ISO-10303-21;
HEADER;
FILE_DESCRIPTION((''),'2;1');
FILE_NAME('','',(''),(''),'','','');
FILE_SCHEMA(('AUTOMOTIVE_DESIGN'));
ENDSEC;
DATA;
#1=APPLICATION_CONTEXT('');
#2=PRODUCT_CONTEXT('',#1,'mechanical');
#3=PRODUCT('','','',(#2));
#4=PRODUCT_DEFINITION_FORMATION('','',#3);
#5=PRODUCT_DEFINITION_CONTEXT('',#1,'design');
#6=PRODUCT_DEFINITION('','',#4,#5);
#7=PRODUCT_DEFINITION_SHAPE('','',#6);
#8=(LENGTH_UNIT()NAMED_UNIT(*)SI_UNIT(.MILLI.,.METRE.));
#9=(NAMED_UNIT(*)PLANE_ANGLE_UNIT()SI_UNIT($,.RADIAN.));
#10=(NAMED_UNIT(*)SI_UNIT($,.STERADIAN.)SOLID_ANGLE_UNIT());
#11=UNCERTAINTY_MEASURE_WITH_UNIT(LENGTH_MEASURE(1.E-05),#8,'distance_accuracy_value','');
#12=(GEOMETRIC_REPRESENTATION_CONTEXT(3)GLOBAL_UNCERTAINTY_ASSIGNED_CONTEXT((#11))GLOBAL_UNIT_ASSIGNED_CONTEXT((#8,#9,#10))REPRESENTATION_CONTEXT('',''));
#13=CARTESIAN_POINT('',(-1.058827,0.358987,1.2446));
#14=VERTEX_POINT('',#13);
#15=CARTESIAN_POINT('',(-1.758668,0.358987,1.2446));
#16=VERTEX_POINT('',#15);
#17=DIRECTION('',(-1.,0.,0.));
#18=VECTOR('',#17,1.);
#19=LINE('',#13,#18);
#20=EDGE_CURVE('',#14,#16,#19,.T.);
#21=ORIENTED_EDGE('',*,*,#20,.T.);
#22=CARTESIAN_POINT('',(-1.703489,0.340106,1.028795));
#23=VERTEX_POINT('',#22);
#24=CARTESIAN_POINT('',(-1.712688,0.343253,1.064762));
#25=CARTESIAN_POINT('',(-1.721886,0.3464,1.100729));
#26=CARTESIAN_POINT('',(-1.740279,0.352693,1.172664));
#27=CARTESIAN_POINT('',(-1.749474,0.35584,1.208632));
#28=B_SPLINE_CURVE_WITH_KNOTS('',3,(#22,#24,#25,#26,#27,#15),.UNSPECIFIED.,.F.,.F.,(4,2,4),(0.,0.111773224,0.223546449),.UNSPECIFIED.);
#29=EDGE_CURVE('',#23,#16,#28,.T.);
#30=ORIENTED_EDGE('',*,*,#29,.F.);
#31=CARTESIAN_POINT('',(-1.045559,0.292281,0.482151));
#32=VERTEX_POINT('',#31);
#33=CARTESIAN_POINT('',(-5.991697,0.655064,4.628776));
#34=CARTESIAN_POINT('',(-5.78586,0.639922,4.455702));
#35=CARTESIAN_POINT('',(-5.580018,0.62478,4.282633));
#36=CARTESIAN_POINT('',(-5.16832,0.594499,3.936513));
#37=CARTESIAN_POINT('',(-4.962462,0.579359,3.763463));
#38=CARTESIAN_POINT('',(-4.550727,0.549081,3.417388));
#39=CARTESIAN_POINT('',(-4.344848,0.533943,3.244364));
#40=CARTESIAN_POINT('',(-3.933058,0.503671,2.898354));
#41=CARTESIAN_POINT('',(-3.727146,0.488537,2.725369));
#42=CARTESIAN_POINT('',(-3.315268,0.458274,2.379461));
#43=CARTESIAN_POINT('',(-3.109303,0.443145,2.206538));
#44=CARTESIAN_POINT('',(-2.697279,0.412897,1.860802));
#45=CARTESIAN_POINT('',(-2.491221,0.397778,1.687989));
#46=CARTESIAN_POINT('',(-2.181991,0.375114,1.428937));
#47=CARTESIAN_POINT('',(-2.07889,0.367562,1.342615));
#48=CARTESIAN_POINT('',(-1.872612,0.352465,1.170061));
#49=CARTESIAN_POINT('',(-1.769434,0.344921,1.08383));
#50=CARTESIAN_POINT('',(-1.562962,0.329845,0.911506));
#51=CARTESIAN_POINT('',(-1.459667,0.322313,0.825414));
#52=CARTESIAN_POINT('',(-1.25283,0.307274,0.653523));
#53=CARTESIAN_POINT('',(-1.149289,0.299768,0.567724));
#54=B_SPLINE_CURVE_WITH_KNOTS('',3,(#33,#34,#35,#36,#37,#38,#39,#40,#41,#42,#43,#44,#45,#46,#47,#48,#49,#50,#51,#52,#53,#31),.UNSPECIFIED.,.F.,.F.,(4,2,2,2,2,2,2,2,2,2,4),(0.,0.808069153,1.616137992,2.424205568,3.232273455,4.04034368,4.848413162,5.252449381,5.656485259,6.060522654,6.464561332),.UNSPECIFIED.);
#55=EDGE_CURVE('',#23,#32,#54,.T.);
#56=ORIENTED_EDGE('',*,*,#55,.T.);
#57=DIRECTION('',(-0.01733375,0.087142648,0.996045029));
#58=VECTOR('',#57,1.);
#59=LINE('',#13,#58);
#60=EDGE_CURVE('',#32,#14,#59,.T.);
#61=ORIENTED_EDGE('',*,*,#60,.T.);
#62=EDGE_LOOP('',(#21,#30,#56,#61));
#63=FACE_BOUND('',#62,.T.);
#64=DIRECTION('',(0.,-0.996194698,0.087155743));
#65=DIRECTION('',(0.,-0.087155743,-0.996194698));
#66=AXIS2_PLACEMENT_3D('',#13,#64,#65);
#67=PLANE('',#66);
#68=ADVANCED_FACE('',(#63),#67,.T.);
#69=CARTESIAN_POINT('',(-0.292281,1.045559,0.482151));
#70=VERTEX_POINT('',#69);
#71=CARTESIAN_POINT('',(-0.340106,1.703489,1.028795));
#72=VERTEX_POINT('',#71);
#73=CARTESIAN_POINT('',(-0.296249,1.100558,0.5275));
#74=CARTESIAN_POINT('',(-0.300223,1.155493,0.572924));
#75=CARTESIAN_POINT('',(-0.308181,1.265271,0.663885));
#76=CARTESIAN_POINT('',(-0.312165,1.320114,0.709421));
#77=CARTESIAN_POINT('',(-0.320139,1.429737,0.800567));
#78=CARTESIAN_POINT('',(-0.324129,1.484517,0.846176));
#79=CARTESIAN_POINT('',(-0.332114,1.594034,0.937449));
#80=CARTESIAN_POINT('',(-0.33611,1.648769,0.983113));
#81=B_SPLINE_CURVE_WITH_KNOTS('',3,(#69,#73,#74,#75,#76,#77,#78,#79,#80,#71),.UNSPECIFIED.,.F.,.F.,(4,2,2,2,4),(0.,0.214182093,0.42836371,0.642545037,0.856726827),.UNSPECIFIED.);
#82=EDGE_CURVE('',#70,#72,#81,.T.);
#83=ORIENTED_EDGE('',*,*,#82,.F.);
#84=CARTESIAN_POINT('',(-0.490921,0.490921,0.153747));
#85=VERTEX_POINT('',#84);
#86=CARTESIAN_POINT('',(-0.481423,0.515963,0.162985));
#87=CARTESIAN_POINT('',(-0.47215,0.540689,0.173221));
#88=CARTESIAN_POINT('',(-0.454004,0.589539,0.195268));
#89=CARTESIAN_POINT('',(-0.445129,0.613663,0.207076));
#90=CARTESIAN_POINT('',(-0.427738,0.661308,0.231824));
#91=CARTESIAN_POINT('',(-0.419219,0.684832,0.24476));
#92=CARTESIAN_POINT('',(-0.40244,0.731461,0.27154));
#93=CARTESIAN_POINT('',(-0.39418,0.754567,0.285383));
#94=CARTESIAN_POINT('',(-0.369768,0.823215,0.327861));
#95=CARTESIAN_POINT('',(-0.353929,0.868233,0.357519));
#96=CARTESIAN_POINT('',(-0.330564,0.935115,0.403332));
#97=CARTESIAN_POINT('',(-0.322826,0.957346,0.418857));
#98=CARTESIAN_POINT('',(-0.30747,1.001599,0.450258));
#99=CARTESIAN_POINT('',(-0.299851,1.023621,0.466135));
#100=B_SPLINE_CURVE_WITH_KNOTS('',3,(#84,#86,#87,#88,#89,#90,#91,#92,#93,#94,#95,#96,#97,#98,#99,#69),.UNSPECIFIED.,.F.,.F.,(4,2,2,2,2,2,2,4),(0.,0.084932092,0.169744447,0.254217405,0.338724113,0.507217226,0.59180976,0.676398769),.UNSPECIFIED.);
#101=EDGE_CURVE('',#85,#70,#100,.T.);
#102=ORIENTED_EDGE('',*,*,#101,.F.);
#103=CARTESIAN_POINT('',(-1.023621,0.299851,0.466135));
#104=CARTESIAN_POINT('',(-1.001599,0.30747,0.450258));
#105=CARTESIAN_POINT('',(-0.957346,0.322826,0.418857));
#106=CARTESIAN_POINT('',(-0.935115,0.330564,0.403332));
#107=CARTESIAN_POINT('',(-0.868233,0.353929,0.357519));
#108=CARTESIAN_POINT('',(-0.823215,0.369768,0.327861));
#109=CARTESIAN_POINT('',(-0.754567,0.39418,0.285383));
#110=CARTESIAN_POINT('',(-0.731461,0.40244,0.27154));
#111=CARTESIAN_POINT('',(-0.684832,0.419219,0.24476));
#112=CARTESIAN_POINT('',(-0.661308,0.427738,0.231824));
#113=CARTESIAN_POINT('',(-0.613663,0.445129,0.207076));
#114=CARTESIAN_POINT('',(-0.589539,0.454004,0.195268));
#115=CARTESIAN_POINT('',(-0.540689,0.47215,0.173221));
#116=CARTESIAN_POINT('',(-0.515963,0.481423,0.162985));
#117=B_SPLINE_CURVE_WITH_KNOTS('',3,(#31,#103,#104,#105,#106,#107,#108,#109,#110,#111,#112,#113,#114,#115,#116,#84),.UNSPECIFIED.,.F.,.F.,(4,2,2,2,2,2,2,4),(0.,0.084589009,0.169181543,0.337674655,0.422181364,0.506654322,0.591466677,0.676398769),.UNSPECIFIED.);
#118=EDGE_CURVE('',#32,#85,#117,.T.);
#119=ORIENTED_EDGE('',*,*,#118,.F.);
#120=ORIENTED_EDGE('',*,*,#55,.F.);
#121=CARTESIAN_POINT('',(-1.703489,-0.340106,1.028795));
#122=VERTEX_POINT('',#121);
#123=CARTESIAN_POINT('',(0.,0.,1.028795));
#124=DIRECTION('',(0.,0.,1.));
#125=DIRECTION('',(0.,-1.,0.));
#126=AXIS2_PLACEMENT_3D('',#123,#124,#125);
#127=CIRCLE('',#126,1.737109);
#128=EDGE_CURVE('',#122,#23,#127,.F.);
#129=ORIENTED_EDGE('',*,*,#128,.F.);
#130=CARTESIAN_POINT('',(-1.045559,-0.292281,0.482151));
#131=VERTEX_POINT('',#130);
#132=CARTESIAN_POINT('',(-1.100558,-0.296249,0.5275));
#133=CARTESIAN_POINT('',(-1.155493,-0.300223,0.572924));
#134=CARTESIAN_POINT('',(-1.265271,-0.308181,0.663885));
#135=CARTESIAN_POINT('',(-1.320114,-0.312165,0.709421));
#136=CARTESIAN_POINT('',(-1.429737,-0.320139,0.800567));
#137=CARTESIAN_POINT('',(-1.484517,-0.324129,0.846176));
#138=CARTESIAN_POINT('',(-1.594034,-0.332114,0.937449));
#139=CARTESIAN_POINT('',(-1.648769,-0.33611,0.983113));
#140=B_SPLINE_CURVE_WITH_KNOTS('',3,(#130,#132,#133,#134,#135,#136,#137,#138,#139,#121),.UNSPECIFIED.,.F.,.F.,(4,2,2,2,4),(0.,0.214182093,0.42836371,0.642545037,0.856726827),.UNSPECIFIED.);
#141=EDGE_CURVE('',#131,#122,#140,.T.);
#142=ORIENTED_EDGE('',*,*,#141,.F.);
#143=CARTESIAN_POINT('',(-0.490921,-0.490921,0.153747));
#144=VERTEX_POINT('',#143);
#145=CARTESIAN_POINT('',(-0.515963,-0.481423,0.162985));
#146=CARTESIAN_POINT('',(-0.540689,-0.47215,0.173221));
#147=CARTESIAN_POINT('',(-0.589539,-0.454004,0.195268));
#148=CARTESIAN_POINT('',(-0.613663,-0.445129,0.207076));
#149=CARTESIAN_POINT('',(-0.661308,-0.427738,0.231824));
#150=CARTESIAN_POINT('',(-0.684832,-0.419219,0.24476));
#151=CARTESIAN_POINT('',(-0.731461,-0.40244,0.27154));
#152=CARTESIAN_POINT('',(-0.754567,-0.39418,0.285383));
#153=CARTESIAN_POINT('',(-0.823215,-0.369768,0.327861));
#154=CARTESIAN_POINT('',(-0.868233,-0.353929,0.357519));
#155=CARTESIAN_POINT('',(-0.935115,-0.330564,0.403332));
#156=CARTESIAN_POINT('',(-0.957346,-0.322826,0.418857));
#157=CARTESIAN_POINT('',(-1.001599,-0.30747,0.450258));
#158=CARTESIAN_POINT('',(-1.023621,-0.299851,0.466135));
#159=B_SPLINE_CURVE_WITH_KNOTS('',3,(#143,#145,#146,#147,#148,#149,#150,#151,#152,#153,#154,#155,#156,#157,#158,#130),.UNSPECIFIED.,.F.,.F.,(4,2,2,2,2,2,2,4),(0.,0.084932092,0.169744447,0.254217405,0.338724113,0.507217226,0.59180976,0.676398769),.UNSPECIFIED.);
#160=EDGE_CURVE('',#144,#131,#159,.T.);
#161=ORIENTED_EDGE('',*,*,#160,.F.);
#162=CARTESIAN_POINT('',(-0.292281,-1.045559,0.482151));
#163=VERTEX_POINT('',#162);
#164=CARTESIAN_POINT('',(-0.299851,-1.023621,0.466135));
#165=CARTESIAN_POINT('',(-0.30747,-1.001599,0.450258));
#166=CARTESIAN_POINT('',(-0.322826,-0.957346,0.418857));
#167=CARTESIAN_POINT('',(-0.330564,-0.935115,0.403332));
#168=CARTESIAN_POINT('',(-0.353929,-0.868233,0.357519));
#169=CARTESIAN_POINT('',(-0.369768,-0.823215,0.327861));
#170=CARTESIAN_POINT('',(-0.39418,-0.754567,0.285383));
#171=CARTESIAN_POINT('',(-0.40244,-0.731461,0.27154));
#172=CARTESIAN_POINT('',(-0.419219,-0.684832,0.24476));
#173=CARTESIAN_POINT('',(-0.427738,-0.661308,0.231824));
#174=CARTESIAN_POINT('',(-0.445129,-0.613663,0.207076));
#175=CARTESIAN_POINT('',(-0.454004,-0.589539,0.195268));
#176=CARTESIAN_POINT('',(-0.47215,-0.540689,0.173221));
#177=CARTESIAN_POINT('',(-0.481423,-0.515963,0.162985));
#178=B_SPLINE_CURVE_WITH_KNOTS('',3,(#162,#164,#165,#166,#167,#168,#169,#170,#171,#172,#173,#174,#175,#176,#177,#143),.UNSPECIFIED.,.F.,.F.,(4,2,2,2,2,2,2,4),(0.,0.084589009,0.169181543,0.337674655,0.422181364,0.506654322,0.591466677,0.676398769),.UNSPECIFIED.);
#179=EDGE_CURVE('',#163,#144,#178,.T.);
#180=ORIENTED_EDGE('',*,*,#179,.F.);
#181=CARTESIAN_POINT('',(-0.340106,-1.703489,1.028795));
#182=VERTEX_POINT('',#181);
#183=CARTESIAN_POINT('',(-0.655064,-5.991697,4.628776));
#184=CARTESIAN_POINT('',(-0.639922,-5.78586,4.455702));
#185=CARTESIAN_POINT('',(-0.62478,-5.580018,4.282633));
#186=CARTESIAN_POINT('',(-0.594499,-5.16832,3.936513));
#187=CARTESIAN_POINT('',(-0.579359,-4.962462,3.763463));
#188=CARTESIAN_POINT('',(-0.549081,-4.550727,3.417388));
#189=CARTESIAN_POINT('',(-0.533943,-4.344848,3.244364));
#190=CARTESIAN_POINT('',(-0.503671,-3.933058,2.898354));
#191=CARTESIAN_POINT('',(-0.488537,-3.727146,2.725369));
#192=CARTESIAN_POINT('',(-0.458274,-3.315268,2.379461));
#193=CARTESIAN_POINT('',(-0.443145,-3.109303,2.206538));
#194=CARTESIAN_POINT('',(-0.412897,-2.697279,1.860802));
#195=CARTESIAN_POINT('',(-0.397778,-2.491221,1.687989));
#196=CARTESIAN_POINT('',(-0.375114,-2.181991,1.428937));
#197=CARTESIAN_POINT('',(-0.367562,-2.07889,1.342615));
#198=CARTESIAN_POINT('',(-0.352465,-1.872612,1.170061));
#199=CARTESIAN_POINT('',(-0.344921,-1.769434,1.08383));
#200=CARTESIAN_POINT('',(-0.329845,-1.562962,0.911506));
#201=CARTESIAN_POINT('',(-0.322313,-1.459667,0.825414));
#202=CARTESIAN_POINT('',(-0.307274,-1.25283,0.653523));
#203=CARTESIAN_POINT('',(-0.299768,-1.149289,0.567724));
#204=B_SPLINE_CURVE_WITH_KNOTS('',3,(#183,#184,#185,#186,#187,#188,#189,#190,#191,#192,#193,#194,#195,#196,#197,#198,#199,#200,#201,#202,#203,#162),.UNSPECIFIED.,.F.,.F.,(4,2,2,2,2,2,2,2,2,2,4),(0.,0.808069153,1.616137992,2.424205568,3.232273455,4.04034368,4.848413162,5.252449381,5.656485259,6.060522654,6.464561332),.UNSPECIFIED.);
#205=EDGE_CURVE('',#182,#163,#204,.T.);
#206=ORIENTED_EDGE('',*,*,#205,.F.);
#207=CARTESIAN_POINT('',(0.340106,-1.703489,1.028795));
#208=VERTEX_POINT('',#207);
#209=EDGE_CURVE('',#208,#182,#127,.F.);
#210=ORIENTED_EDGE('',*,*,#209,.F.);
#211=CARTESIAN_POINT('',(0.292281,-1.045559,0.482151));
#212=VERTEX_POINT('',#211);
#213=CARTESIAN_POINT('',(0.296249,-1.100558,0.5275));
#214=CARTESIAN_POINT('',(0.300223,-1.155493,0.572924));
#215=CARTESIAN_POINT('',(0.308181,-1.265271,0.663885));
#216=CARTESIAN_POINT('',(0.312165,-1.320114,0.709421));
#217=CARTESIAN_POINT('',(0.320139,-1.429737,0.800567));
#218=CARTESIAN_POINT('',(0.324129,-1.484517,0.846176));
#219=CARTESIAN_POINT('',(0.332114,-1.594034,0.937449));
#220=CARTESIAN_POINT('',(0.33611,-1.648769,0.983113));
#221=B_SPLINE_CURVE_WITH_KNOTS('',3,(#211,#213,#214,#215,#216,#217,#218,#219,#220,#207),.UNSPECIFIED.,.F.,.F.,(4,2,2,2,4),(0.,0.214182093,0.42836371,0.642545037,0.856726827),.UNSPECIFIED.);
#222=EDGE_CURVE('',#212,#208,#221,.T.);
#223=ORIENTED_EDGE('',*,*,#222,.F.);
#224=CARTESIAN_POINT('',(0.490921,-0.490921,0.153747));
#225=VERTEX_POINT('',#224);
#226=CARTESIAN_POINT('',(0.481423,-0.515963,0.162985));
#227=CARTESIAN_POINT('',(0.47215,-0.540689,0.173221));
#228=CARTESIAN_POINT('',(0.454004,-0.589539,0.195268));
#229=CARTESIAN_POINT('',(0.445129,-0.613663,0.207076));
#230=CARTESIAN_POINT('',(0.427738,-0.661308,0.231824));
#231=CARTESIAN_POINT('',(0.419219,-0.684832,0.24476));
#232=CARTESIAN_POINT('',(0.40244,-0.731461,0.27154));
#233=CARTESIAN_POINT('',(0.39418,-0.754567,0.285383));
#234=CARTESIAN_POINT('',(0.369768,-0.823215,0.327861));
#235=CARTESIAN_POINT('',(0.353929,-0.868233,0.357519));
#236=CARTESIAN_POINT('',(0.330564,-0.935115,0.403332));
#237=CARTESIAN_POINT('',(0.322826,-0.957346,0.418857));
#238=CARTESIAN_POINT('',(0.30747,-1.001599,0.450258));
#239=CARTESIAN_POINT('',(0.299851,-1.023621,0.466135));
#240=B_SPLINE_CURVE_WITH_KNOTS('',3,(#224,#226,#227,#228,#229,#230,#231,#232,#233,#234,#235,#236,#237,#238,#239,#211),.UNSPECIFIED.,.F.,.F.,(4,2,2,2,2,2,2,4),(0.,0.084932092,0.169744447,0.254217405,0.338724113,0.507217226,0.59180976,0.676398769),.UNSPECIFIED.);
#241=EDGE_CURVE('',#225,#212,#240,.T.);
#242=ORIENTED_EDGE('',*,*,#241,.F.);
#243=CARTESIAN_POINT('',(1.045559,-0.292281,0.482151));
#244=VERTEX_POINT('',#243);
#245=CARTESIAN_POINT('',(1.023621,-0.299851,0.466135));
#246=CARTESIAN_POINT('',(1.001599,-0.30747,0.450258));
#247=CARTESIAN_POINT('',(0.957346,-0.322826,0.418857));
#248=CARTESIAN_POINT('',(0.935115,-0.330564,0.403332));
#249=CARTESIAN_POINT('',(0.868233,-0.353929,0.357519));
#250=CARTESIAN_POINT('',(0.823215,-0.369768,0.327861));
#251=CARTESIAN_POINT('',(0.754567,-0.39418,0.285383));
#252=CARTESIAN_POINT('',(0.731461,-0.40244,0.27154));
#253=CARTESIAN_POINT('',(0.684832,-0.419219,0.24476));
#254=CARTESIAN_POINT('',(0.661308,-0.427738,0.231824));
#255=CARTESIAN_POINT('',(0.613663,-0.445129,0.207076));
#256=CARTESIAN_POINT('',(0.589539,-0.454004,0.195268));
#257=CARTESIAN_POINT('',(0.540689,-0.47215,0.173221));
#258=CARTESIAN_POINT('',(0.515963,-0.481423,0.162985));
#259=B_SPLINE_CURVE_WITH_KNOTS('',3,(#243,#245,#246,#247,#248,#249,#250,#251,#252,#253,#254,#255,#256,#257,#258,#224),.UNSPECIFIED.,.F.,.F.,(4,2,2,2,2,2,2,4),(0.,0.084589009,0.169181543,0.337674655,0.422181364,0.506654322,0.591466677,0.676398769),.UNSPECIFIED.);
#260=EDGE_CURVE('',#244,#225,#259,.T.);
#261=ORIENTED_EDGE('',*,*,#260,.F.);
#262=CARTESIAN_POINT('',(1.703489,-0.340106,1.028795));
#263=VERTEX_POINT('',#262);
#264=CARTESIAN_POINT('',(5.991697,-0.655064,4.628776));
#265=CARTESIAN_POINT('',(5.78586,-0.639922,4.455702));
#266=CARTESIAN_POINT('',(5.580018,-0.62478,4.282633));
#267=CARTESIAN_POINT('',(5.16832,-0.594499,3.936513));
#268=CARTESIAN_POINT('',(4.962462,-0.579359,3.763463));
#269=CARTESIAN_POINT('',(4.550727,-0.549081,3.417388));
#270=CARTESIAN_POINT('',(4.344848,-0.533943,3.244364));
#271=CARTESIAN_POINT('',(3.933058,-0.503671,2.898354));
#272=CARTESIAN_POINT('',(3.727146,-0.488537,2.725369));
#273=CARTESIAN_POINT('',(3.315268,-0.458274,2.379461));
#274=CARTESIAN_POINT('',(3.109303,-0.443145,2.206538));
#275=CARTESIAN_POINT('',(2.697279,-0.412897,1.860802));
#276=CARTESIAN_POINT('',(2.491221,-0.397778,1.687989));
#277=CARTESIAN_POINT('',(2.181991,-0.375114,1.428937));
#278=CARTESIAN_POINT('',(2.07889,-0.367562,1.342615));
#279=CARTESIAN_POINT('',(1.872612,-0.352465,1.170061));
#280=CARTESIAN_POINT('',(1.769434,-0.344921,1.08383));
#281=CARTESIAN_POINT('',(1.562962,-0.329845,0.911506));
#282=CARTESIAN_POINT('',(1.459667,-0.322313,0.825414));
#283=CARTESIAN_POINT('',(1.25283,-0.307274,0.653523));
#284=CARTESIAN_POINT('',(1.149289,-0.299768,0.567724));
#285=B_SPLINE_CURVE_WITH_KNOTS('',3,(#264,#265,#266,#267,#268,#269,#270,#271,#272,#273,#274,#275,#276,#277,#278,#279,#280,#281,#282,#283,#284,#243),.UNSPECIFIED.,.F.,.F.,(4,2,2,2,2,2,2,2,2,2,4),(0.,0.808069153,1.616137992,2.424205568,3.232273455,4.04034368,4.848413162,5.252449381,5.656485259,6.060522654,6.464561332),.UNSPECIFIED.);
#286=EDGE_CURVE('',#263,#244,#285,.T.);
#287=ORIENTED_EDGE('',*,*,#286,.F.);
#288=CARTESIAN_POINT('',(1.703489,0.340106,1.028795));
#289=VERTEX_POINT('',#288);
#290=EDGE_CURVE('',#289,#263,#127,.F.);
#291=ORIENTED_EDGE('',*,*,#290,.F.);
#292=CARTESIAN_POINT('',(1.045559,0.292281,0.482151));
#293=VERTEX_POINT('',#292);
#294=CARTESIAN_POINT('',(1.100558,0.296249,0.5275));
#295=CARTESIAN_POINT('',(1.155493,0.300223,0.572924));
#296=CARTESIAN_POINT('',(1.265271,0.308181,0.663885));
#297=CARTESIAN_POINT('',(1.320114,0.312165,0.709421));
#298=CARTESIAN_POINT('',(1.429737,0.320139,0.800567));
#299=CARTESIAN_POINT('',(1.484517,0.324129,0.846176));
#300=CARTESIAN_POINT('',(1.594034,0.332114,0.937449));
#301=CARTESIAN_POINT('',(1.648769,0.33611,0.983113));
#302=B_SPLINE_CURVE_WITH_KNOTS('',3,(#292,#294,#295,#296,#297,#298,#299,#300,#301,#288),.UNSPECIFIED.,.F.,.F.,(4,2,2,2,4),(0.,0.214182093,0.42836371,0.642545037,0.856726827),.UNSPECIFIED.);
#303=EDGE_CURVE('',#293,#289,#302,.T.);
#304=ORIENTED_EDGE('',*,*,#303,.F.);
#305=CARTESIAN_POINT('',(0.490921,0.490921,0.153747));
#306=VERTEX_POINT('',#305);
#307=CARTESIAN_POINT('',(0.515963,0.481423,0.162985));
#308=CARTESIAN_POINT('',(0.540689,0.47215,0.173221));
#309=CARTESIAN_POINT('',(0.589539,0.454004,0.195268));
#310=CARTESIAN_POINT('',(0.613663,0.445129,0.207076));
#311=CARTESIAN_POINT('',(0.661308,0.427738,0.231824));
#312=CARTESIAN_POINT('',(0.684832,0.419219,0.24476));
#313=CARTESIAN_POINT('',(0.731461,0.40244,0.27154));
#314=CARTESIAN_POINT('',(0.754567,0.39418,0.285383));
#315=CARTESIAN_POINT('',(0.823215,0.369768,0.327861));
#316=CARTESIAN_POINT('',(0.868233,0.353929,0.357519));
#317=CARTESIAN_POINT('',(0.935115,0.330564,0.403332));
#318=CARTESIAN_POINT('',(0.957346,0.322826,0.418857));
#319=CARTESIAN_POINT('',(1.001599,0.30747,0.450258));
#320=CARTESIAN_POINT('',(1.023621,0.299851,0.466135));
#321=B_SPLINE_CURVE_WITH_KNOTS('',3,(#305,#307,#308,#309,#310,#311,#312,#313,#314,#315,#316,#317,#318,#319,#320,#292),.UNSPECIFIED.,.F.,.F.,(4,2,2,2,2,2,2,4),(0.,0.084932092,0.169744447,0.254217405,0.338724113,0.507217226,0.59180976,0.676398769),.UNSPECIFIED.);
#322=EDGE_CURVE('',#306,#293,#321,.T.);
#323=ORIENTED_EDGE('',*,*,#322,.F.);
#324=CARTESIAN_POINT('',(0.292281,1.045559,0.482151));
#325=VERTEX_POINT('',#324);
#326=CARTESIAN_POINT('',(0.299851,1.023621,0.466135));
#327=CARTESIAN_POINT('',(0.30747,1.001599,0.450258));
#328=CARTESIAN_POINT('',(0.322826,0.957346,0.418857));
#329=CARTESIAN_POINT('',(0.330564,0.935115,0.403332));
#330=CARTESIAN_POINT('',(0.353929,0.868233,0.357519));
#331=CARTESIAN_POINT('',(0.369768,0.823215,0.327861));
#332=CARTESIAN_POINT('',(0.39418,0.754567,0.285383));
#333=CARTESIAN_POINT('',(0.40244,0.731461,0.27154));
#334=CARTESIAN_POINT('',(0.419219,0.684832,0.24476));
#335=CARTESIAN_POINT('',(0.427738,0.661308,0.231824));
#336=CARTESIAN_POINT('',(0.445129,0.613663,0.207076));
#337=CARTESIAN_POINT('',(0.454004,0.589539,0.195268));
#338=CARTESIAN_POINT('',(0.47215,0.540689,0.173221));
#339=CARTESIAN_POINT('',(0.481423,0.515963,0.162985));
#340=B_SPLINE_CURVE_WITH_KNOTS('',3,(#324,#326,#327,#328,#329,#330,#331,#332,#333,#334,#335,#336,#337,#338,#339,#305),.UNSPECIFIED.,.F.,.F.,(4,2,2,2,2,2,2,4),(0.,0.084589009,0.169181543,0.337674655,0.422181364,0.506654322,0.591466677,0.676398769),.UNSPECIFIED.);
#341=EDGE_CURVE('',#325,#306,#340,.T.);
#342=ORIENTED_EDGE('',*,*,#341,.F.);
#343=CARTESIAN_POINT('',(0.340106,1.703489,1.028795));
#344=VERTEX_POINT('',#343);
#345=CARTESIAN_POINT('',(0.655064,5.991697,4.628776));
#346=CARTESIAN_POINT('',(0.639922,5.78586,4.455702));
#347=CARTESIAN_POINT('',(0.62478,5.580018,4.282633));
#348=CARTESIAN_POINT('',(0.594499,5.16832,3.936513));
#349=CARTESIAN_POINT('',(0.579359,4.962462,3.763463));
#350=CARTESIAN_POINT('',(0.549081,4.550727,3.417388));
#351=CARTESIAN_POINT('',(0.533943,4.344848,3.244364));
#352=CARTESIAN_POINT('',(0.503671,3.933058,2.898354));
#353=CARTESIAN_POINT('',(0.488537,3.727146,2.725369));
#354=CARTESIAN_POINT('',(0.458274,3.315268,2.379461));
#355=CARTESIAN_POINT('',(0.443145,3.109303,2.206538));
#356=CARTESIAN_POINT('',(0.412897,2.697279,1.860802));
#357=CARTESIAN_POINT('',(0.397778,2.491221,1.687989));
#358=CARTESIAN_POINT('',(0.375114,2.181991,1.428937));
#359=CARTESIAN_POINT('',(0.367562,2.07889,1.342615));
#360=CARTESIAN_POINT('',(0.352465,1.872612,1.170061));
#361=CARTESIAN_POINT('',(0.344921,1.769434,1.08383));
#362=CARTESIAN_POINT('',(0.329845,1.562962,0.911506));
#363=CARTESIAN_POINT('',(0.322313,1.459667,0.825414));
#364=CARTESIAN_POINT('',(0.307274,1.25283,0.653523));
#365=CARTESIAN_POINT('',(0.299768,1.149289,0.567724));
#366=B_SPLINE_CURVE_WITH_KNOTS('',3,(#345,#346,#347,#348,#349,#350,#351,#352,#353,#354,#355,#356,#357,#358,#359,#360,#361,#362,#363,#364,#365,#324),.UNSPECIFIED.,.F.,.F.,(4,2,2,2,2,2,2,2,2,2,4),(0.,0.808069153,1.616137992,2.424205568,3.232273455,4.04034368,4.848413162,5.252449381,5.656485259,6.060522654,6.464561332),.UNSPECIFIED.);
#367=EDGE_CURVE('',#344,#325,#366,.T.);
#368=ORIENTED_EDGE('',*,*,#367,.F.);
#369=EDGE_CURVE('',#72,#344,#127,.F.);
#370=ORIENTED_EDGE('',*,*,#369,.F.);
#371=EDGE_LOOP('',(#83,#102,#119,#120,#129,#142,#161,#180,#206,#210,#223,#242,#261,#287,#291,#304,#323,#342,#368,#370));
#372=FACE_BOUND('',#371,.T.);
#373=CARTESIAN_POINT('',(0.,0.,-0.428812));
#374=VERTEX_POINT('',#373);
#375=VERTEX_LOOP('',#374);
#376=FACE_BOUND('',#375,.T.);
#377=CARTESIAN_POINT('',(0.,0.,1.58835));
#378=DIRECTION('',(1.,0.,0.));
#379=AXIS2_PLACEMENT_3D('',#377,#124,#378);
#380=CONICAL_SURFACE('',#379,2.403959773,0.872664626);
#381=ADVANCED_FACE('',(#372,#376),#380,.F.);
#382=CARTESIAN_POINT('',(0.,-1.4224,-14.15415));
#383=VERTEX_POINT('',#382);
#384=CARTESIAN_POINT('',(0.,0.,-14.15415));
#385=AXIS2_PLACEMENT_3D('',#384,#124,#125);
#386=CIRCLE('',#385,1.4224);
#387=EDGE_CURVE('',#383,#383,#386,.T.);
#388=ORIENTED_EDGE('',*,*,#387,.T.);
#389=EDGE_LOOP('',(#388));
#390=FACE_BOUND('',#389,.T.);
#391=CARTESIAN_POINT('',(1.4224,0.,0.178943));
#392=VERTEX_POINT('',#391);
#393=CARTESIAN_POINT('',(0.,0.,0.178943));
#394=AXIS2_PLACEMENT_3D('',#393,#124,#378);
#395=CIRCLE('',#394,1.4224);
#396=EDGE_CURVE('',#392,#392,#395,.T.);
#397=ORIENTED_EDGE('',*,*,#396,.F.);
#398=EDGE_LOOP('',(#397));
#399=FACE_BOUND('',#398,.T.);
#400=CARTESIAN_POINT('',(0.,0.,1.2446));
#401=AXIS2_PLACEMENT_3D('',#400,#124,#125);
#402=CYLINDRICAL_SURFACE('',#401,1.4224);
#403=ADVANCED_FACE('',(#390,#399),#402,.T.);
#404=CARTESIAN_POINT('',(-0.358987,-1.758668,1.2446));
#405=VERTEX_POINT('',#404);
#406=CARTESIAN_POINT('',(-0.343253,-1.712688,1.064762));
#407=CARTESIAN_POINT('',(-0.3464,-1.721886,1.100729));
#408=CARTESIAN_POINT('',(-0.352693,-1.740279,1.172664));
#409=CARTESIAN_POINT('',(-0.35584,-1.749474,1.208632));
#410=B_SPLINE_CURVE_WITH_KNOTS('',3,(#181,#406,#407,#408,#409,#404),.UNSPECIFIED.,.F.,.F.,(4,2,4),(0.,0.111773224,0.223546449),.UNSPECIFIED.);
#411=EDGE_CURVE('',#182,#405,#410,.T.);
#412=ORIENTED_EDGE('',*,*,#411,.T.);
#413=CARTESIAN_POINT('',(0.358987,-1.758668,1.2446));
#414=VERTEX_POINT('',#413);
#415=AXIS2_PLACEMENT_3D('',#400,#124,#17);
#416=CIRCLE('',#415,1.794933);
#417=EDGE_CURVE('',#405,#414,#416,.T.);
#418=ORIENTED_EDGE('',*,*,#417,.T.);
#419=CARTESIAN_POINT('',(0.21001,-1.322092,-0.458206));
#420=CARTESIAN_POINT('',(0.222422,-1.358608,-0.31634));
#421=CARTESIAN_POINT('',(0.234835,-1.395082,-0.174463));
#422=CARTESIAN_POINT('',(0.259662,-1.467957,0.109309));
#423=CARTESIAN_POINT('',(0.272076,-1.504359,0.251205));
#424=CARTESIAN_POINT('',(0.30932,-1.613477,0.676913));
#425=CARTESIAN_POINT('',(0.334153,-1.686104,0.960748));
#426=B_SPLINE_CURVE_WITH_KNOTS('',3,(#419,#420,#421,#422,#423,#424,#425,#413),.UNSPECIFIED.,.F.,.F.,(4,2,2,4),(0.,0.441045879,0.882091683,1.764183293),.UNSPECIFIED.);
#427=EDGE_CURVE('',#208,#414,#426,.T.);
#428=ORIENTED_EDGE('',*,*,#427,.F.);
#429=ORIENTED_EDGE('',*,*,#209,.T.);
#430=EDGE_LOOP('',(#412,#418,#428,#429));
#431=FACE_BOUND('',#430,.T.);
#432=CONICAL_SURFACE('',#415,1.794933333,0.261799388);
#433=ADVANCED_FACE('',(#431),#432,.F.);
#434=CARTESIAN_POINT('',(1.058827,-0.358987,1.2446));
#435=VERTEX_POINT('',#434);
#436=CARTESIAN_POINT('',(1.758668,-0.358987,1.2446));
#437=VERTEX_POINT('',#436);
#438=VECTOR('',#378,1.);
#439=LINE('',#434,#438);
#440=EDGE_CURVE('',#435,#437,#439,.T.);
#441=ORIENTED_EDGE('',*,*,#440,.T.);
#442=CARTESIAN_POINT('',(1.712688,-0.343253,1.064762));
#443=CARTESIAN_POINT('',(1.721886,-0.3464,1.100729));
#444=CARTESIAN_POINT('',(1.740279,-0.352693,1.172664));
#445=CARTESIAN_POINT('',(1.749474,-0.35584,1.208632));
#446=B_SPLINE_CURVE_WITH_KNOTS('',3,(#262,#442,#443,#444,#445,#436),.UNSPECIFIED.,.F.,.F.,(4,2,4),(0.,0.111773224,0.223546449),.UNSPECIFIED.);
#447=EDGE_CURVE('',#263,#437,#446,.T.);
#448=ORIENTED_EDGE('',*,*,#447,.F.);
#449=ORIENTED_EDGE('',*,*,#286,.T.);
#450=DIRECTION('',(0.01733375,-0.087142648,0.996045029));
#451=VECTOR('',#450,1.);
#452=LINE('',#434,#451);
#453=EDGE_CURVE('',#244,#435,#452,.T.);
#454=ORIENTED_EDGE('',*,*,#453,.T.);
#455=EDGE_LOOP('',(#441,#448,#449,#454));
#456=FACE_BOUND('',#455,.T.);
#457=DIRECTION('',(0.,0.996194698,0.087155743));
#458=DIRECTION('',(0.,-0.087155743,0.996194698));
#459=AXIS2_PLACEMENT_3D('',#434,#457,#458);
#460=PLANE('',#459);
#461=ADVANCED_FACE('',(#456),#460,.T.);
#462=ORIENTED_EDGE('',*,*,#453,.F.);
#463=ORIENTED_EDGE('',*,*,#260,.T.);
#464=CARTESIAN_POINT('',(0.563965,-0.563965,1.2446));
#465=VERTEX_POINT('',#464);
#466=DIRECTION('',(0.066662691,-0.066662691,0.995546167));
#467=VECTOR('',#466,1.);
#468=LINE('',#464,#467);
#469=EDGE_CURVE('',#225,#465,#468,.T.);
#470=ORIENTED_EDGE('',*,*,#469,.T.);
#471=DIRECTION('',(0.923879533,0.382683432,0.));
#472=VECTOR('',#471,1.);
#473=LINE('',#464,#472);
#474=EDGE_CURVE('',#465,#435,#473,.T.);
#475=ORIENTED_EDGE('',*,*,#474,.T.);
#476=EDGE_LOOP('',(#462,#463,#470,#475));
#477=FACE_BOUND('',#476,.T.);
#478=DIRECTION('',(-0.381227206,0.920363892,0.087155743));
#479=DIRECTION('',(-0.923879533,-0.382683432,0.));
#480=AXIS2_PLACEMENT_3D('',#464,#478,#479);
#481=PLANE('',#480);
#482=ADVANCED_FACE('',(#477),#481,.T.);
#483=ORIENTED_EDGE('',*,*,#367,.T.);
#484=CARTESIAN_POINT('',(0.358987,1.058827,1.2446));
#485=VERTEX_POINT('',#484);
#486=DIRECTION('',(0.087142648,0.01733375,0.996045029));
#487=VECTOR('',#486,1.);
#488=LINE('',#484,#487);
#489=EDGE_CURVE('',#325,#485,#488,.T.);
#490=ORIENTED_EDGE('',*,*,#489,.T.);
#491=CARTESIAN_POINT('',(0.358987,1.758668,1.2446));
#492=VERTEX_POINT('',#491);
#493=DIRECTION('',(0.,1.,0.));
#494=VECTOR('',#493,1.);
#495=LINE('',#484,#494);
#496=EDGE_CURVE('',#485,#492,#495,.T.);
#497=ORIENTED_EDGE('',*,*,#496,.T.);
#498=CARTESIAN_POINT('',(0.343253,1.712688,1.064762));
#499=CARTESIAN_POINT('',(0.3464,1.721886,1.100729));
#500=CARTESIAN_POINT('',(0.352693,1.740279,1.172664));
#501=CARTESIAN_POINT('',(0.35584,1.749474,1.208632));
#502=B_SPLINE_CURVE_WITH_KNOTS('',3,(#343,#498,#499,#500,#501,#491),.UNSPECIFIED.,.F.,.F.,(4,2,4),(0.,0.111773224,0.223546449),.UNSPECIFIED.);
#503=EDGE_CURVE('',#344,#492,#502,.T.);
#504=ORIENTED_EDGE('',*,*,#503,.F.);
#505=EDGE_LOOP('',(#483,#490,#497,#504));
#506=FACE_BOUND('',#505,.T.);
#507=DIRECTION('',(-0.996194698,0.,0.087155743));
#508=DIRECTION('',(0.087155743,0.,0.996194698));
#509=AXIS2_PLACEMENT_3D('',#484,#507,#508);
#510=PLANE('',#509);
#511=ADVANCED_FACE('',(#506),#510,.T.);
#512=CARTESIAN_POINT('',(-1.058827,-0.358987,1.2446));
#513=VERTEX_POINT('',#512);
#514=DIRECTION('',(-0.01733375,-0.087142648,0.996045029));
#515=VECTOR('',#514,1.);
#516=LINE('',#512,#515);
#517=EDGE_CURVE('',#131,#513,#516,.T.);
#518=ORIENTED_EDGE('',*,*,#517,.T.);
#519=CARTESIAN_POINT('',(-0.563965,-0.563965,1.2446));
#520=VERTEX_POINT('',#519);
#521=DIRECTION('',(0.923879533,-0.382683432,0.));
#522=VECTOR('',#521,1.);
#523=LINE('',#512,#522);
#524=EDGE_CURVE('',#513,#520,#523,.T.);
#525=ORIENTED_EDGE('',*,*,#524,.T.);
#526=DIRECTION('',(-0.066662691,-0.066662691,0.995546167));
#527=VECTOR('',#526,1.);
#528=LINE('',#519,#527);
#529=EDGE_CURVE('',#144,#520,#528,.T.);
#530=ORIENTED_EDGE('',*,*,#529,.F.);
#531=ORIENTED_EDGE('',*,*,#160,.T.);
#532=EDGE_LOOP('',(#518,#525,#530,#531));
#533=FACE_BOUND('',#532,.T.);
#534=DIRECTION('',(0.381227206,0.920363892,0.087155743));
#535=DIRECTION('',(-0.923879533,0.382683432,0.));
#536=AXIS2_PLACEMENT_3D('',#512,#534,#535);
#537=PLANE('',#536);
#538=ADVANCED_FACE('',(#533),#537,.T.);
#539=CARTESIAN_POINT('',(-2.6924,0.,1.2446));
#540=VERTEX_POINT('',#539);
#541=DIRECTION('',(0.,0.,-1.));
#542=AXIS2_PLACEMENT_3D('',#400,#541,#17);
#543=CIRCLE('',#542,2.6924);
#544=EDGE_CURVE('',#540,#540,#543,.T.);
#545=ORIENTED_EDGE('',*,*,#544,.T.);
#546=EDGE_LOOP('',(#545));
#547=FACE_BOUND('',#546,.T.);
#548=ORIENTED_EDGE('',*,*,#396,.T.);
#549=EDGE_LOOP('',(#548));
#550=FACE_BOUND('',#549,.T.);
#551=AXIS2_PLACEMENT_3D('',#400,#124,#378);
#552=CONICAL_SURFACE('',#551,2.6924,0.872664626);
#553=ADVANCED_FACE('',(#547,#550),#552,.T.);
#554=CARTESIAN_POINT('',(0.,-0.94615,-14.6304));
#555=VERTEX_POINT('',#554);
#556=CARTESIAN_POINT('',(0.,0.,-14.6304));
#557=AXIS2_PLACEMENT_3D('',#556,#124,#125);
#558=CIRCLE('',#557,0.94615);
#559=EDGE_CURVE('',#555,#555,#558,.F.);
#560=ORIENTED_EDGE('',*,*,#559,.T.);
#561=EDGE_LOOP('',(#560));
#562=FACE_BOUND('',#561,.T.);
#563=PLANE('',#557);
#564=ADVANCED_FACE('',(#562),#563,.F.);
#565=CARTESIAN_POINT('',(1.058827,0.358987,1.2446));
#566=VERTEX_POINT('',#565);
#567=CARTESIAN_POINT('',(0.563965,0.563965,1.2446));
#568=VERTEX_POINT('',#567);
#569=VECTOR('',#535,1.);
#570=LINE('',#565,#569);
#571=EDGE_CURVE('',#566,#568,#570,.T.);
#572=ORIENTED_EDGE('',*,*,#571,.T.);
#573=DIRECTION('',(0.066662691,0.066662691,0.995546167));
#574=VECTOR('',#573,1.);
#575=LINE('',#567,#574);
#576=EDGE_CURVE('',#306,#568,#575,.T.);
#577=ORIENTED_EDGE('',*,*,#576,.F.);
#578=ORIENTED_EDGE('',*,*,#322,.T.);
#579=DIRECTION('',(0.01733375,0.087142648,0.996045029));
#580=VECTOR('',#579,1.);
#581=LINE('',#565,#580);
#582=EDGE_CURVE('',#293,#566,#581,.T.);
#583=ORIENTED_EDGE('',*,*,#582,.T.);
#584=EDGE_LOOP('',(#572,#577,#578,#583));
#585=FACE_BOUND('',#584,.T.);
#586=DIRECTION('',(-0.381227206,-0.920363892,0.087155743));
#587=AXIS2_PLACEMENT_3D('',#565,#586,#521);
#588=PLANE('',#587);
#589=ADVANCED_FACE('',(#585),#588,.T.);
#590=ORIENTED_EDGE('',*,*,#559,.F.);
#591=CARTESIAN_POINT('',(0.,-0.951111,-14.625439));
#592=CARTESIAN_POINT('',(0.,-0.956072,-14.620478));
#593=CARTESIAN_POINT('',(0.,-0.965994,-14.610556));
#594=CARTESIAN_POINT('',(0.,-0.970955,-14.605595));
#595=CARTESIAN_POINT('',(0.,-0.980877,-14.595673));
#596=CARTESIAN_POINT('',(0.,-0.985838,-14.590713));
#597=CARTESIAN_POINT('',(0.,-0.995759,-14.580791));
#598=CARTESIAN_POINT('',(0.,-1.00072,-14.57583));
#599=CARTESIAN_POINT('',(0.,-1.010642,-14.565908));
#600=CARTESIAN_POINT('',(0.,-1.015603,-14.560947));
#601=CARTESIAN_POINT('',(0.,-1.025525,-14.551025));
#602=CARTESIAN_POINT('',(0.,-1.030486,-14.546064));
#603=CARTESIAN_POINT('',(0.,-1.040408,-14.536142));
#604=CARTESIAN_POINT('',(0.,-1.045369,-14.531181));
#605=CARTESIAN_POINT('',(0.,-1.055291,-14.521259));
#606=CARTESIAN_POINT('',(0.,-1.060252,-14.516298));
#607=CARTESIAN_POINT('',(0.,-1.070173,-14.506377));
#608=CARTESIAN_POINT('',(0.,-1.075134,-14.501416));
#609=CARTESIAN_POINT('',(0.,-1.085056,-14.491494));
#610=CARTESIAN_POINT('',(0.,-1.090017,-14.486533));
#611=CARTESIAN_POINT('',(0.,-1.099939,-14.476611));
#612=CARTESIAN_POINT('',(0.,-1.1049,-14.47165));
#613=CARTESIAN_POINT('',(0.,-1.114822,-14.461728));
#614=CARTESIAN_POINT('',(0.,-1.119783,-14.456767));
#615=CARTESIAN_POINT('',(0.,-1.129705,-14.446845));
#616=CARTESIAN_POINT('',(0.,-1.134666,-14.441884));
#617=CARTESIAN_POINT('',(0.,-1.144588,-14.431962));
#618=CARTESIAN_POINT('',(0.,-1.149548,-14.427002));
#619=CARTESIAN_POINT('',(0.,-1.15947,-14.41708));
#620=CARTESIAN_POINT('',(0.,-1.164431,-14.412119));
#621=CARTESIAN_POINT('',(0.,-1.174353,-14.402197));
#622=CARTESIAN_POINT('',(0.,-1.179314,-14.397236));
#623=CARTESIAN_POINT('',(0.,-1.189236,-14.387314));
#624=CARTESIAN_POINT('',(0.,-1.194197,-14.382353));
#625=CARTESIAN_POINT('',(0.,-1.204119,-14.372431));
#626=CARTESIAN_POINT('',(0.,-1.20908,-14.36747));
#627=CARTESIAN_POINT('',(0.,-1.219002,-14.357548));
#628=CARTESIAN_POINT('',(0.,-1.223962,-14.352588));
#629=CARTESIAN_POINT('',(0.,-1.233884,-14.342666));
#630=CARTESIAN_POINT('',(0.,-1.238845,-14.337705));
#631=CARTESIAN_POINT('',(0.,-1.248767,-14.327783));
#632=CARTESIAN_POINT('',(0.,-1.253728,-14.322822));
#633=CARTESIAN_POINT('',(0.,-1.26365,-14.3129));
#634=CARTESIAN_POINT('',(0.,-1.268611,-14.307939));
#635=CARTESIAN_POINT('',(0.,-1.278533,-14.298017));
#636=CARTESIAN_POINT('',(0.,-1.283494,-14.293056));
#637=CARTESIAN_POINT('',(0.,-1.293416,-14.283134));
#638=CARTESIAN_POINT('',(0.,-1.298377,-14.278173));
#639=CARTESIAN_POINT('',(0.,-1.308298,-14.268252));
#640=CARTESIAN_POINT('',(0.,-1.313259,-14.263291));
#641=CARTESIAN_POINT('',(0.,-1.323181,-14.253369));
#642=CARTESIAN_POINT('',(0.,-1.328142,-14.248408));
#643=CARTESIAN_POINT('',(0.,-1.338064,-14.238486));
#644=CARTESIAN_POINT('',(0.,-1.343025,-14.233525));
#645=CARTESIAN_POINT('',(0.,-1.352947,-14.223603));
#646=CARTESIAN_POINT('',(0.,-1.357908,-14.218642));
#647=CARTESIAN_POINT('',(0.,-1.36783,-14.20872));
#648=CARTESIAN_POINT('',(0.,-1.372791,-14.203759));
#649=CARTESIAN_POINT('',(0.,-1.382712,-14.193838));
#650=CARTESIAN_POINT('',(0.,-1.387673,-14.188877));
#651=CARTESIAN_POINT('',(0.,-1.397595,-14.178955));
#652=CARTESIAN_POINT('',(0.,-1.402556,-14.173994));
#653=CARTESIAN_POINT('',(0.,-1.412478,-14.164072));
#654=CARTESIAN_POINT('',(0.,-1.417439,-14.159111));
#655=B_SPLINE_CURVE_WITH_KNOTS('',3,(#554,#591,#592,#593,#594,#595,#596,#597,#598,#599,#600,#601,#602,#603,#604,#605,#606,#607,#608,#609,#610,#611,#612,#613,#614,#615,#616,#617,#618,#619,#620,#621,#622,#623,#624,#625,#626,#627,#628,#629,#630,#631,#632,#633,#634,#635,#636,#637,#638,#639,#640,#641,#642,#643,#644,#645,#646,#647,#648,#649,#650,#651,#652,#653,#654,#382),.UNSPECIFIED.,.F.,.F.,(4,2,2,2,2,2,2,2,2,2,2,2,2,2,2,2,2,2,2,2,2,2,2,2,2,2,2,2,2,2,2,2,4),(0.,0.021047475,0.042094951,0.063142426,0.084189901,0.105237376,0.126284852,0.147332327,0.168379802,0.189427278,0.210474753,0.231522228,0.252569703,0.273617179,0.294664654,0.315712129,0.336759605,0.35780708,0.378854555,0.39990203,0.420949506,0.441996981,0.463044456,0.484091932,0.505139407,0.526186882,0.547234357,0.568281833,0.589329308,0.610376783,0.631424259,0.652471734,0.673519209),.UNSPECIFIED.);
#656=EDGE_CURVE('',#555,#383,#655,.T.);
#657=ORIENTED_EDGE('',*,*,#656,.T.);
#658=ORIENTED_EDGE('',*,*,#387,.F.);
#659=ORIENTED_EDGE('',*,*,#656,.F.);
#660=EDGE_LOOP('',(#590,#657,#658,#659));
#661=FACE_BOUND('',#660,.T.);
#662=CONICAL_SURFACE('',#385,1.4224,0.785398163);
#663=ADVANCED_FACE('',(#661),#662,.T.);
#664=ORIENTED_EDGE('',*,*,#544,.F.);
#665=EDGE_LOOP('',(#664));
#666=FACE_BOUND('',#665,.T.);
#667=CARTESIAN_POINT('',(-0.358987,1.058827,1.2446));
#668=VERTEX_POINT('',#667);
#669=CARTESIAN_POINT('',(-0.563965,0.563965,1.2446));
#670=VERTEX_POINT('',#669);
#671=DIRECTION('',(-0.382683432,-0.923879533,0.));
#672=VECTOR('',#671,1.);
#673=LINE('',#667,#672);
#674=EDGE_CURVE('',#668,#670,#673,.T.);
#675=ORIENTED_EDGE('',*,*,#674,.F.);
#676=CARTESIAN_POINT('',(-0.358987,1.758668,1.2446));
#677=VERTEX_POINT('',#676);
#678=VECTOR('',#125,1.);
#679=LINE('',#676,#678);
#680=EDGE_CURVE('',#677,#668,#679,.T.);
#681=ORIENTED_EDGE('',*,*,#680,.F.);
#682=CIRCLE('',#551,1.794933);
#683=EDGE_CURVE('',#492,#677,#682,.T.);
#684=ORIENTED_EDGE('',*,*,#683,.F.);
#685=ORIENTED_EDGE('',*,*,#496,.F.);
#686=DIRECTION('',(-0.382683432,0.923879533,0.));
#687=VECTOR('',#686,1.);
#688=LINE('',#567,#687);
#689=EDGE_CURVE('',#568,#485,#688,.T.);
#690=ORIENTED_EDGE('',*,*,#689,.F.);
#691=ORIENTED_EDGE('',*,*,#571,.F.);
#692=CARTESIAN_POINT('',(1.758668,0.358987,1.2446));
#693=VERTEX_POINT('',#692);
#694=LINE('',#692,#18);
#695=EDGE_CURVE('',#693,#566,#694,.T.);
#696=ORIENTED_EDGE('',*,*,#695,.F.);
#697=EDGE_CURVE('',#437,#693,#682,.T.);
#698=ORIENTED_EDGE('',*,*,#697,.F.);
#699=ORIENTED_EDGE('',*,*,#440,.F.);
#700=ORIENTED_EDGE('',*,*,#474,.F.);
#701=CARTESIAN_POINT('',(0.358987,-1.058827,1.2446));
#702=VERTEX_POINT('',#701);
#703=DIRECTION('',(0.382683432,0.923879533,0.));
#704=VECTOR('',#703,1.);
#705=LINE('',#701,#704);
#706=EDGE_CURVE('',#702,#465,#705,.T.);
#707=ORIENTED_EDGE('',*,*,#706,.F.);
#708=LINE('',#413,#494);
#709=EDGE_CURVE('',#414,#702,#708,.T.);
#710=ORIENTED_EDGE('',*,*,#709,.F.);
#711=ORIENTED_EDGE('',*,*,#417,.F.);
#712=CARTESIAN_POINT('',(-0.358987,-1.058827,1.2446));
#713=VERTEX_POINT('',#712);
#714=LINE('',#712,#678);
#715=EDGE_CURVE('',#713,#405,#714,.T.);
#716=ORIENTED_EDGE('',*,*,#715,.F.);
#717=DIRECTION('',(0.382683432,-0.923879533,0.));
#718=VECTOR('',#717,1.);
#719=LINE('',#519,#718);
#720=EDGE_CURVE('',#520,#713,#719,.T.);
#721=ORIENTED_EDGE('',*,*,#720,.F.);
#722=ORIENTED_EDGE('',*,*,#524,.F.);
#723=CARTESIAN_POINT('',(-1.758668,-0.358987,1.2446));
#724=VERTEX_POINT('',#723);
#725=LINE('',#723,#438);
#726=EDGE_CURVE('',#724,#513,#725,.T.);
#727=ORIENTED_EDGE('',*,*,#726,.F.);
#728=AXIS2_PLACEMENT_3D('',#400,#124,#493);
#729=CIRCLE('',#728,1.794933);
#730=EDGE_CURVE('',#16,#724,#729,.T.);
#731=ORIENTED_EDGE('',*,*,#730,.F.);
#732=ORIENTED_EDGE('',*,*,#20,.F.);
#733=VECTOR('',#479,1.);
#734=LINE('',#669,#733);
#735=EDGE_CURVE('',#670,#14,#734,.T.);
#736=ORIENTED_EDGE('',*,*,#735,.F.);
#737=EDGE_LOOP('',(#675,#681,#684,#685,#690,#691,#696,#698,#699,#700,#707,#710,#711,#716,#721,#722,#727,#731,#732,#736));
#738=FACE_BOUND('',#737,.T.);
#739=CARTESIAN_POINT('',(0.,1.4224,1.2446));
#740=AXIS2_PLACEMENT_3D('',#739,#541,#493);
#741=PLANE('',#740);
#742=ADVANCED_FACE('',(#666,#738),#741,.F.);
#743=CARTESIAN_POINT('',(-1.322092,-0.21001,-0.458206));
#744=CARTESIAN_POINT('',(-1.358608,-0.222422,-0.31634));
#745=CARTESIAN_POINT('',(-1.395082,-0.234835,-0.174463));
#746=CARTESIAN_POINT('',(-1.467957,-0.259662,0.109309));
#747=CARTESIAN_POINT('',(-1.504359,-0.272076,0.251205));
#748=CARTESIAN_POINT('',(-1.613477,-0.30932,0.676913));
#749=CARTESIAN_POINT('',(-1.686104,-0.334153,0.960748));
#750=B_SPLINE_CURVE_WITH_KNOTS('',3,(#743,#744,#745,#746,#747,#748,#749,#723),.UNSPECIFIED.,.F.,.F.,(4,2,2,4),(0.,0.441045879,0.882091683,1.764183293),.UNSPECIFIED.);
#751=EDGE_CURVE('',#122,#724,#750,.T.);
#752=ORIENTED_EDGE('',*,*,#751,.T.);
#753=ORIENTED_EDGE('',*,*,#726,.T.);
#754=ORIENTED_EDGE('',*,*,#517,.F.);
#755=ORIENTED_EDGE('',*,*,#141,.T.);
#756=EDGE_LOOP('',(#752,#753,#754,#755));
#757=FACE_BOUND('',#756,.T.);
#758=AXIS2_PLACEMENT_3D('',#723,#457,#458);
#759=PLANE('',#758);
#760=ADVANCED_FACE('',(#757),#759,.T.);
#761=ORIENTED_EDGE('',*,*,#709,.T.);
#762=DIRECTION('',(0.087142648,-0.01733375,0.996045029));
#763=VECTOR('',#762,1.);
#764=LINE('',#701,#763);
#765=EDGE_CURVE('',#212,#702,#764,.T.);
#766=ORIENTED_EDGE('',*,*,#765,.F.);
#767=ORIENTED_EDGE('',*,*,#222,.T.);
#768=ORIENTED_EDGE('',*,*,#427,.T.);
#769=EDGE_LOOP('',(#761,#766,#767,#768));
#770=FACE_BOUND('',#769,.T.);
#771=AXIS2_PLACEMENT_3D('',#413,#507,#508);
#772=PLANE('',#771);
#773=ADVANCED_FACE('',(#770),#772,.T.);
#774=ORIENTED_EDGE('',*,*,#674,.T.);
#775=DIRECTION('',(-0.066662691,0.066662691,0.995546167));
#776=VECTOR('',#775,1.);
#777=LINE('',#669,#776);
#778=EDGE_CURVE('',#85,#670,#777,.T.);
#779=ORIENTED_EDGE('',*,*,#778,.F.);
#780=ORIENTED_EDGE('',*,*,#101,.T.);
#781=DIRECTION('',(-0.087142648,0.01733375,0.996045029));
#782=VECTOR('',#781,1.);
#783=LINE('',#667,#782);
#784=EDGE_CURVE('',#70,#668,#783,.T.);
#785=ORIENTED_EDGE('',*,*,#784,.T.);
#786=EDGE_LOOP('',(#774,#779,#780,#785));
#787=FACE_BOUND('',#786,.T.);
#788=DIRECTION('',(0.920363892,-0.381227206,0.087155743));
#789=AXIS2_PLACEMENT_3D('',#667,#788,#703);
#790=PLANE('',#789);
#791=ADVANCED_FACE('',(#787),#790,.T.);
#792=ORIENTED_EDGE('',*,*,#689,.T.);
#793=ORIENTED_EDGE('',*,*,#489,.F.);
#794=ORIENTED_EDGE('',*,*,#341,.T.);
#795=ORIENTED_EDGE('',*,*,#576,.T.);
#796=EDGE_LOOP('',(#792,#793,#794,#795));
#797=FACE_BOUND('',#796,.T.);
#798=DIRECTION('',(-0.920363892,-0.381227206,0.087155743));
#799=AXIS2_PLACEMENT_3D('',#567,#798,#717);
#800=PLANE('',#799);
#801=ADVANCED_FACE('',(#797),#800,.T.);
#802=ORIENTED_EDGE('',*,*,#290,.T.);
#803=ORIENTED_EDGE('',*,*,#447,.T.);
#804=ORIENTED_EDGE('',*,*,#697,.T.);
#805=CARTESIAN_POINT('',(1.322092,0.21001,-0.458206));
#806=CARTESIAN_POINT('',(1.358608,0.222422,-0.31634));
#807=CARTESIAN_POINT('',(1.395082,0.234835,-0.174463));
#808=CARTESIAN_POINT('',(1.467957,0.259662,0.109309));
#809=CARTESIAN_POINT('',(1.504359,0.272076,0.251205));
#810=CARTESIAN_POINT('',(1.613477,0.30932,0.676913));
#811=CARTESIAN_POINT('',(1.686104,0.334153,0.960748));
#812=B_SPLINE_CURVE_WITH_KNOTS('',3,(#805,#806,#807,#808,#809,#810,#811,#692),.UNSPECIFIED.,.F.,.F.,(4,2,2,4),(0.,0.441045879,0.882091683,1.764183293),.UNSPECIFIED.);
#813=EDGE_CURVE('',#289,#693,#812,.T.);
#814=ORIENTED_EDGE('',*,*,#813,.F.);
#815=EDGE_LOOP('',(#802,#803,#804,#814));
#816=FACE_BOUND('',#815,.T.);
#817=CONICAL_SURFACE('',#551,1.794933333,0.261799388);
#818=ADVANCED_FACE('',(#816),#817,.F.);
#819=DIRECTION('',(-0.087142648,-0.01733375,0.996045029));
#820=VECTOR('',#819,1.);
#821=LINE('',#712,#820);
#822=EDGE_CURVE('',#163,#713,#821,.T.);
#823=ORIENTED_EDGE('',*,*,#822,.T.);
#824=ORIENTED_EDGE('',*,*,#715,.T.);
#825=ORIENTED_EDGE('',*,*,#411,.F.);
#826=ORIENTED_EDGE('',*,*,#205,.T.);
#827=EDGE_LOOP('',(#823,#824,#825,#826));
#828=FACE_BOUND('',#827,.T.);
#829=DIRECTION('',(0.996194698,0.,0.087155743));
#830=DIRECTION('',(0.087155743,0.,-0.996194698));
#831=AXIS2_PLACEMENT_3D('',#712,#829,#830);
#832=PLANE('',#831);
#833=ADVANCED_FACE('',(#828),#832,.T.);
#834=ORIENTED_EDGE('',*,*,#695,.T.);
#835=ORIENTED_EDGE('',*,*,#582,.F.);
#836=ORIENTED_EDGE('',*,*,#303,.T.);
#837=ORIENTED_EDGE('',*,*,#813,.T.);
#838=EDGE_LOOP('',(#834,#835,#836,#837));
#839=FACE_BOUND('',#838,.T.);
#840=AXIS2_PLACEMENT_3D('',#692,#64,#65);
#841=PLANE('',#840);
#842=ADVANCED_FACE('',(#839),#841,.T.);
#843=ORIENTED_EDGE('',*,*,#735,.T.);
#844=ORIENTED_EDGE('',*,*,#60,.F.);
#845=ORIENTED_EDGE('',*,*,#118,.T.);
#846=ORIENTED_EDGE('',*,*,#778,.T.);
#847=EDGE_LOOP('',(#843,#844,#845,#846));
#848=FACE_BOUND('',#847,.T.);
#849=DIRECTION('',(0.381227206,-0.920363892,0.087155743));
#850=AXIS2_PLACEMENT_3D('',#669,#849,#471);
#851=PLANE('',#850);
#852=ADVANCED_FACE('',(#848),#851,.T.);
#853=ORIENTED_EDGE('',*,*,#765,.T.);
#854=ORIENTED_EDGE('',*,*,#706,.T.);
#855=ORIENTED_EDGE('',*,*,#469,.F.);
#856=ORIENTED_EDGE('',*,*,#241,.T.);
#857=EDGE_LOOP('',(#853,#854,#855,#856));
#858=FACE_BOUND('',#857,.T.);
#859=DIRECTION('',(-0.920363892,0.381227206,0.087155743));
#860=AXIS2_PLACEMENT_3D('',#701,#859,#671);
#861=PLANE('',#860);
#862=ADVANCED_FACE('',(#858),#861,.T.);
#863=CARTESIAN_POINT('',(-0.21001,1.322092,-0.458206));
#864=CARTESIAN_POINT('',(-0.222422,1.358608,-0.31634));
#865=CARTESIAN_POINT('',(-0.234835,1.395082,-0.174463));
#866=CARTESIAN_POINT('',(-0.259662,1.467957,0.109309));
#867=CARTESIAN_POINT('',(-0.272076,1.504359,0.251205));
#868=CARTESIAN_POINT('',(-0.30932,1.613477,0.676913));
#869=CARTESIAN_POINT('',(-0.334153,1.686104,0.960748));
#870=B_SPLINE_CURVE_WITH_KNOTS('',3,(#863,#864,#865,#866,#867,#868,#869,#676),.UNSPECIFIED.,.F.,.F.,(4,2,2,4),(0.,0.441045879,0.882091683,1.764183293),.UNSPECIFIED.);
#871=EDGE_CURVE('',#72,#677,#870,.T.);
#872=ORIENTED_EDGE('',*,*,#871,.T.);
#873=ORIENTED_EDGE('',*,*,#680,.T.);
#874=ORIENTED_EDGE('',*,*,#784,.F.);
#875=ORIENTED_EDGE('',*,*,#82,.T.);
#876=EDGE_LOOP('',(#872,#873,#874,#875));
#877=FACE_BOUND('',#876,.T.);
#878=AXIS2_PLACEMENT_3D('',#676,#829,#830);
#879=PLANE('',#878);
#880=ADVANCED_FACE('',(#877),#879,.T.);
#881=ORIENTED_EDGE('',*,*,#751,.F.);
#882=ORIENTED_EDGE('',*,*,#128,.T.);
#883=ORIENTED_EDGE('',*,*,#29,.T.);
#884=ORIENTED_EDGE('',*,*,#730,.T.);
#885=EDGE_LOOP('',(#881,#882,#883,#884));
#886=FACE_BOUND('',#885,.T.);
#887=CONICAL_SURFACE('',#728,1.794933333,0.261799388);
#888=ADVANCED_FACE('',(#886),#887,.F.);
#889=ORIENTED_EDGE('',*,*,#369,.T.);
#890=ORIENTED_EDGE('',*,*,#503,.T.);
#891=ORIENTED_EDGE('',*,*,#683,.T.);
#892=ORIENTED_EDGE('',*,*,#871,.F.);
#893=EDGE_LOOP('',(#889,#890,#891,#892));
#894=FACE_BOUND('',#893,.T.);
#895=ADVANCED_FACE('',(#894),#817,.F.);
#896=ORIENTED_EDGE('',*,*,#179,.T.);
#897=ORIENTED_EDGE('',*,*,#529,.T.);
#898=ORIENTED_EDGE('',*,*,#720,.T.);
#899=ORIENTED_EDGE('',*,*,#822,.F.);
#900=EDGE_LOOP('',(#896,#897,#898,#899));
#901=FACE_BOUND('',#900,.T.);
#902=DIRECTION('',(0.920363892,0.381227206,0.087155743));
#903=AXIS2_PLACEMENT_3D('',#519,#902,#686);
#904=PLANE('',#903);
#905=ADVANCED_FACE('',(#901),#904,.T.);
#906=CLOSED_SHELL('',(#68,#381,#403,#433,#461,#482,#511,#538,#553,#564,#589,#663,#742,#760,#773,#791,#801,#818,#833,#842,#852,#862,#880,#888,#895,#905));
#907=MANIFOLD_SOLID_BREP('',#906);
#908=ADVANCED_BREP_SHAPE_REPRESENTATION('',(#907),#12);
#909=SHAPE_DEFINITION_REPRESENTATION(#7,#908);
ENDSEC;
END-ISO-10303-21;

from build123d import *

# Parameters (mm, degrees)
SKETCH1_R          = 2.6924
EXTRUDE3_DEPTH     = 1.2446
SKETCH4_W          = 15.875
SKETCH4_H          = 1.4224
CHAMFER1_SIZE      = 0.47625
SKETCH26_R         = 0.7112
EXTRUDE8_DEPTH     = 1.2446
CUT_EXTRUDE3_REACH = 18.325
CIRPATTERN1_COUNT  = 4
DRAFT2_ANGLE       = 5


# Read off the part's stored shape, not the designer's step: Extrude10, Draft1
with BuildPart() as part:
    # Sketch1 → Extrude3 (new body)
    with BuildSketch(Plane.XY):
        Circle(SKETCH1_R)
    extrude(amount=EXTRUDE3_DEPTH)

    # Sketch11 → Cut-Revolve3 (revolve, cut)
    with BuildSketch(Plane(origin=(0, 0, 0), x_dir=(0, 0, -1), z_dir=(1, 0, 0)), mode=Mode.PRIVATE) as cut_revolve3_sk:
        Polygon((0, 1.209143479), (-1.2446, 2.6924), (0, 2.6924), align=None)
    revolve(cut_revolve3_sk.sketch.rotate(Axis((0, 0, -0.441444004), (0, 0, 1)), 90), axis=Axis((0, 0, -0.441444004), (0, 0, 1)), mode=Mode.SUBTRACT)

    # Extrude10 outline → Extrude10 (revolve)
    with BuildSketch(Plane.XZ):
        Polygon((1.4224, 0), (1.4224, 0.178943468), (1.209143479, 0.178943468), (1.209143479, 0), (0, 0), (0, -1.4224), align=None)
    revolve(axis=Axis((0, 0, 0), (0, 0, 1)))



with BuildPart() as body_2:
    # Sketch4 → Revolve1 (revolve)
    with BuildSketch(Plane(origin=(0, 0, 0), x_dir=(0, 0, -1), z_dir=(1, 0, 0)), mode=Mode.PRIVATE) as revolve1_sk:
        with Locations((6.6929, 0.7112)):
            Rectangle(SKETCH4_W, SKETCH4_H)
    revolve(revolve1_sk.sketch.rotate(Axis((0, 0, 1.2446), (0, 0, -1)), 180), axis=Axis((0, 0, 1.2446), (0, 0, -1)))

    # Chamfer1
    chamfer1_edges = [body_2.edges().sort_by_distance(p)[0] for p in [
        (0, 1.4224, -14.6304),
    ]]
    chamfer(chamfer1_edges, length=CHAMFER1_SIZE)


with BuildPart() as part_1:
    add(part.part)

    add(body_2.part)  # Extrude8 merges body 2
    # Sketch26 → Extrude8 (add)
    with BuildSketch(Plane.XY.offset(1.2446)):
        Circle(SKETCH26_R)
    extrude(amount=-EXTRUDE8_DEPTH)

    # Cut-Extrude3: up to this cone (the profile starts inside it)
    cut_extrude3_end = Plane(origin=(0, 0, 1.2446), z_dir=(0, 0, 1)).offset(-1.673411083) * Cone(1.192e-06, 26.805764308, 22.492705944, align=(Align.CENTER, Align.CENTER, Align.MIN), mode=Mode.PRIVATE)
    # Sketch12 → Cut-Extrude3 (cut, up to the surface)
    with BuildSketch(Plane.XY.offset(1.2446), mode=Mode.PRIVATE) as cut_extrude3_sk1:
        with BuildLine():
            Line((1.758668316, 0.358986667), (1.058827491, 0.358986667))
            Line((1.058827491, 0.358986667), (0.563965298, 0.563965298))
            Line((0.563965298, 0.563965298), (0.358986667, 1.058827491))
            Line((0.358986667, 1.058827491), (0.358986667, 1.758668316))
            ThreePointArc((0.358986667, 1.758668316), (0.180406886, 1.785844066), (0, 1.794933333))
            Line((0, 1.794933333), (0, 0))
            Line((0, 0), (1.794933333, 0))
            ThreePointArc((1.794933333, 0), (1.785844066, 0.180406886), (1.758668316, 0.358986667))
        make_face()
    cut_extrude3_tool1 = extrude(cut_extrude3_sk1.sketch, amount=-CUT_EXTRUDE3_REACH, mode=Mode.PRIVATE) & cut_extrude3_end
    cut_extrude3 = cut_extrude3_tool1.solids().sort_by_distance((1.408748, 0.333602, 1.2446))[0]
    add(cut_extrude3, mode=Mode.SUBTRACT)

    # CirPattern1: Cut-Extrude3 ×4 about axis
    cirpattern1_axis = Axis((0, 0, 0), (0, 0, 1))
    for i in range(1, CIRPATTERN1_COUNT):
        add(cut_extrude3.rotate(cirpattern1_axis, i * 360 / CIRPATTERN1_COUNT), mode=Mode.SUBTRACT)

    # Draft1 outline → Draft1 (revolve)
    with BuildSketch(Plane.XZ):
        Polygon((1.794933333, 1.2446), (1.737108581, 1.028795087), (1.794933333, 1.028795087), align=None)
    revolve(axis=Axis((0, 0, 0), (0, 0, 1)))

    # Draft2
    draft2_faces = [part_1.faces().sort_by_distance(p)[0] for p in [
        (0.358986667, 1.329150829, 0.986428177),
        (0.466729534, 0.798713199, 0.799402029),
        (0.798713199, 0.466729534, 0.799402029),
        (1.329150829, 0.358986667, 0.986428177),
        (1.329150829, -0.358986667, 0.986428177),
        (0.798713199, -0.466729534, 0.799402029),
        (0.466729534, -0.798713199, 0.799402029),
        (0.358986667, -1.329150829, 0.986428177),
        (-0.358986667, -1.329150829, 0.986428177),
        (-0.466729534, -0.798713199, 0.799402029),
        (-0.798713199, -0.466729534, 0.799402029),
        (-1.329150829, -0.358986667, 0.986428177),
        (-1.329150829, 0.358986667, 0.986428177),
        (-0.798713199, 0.466729534, 0.799402029),
        (-0.466729534, 0.798713199, 0.799402029),
        (-0.358986667, 1.329150829, 0.986428177),
    ]]
    draft(draft2_faces, Plane(origin=(0, 1.4224, 1.2446), x_dir=(0, 1, 0), z_dir=(0, 0, 1)), DRAFT2_ANGLE)


solid = part_1.part
